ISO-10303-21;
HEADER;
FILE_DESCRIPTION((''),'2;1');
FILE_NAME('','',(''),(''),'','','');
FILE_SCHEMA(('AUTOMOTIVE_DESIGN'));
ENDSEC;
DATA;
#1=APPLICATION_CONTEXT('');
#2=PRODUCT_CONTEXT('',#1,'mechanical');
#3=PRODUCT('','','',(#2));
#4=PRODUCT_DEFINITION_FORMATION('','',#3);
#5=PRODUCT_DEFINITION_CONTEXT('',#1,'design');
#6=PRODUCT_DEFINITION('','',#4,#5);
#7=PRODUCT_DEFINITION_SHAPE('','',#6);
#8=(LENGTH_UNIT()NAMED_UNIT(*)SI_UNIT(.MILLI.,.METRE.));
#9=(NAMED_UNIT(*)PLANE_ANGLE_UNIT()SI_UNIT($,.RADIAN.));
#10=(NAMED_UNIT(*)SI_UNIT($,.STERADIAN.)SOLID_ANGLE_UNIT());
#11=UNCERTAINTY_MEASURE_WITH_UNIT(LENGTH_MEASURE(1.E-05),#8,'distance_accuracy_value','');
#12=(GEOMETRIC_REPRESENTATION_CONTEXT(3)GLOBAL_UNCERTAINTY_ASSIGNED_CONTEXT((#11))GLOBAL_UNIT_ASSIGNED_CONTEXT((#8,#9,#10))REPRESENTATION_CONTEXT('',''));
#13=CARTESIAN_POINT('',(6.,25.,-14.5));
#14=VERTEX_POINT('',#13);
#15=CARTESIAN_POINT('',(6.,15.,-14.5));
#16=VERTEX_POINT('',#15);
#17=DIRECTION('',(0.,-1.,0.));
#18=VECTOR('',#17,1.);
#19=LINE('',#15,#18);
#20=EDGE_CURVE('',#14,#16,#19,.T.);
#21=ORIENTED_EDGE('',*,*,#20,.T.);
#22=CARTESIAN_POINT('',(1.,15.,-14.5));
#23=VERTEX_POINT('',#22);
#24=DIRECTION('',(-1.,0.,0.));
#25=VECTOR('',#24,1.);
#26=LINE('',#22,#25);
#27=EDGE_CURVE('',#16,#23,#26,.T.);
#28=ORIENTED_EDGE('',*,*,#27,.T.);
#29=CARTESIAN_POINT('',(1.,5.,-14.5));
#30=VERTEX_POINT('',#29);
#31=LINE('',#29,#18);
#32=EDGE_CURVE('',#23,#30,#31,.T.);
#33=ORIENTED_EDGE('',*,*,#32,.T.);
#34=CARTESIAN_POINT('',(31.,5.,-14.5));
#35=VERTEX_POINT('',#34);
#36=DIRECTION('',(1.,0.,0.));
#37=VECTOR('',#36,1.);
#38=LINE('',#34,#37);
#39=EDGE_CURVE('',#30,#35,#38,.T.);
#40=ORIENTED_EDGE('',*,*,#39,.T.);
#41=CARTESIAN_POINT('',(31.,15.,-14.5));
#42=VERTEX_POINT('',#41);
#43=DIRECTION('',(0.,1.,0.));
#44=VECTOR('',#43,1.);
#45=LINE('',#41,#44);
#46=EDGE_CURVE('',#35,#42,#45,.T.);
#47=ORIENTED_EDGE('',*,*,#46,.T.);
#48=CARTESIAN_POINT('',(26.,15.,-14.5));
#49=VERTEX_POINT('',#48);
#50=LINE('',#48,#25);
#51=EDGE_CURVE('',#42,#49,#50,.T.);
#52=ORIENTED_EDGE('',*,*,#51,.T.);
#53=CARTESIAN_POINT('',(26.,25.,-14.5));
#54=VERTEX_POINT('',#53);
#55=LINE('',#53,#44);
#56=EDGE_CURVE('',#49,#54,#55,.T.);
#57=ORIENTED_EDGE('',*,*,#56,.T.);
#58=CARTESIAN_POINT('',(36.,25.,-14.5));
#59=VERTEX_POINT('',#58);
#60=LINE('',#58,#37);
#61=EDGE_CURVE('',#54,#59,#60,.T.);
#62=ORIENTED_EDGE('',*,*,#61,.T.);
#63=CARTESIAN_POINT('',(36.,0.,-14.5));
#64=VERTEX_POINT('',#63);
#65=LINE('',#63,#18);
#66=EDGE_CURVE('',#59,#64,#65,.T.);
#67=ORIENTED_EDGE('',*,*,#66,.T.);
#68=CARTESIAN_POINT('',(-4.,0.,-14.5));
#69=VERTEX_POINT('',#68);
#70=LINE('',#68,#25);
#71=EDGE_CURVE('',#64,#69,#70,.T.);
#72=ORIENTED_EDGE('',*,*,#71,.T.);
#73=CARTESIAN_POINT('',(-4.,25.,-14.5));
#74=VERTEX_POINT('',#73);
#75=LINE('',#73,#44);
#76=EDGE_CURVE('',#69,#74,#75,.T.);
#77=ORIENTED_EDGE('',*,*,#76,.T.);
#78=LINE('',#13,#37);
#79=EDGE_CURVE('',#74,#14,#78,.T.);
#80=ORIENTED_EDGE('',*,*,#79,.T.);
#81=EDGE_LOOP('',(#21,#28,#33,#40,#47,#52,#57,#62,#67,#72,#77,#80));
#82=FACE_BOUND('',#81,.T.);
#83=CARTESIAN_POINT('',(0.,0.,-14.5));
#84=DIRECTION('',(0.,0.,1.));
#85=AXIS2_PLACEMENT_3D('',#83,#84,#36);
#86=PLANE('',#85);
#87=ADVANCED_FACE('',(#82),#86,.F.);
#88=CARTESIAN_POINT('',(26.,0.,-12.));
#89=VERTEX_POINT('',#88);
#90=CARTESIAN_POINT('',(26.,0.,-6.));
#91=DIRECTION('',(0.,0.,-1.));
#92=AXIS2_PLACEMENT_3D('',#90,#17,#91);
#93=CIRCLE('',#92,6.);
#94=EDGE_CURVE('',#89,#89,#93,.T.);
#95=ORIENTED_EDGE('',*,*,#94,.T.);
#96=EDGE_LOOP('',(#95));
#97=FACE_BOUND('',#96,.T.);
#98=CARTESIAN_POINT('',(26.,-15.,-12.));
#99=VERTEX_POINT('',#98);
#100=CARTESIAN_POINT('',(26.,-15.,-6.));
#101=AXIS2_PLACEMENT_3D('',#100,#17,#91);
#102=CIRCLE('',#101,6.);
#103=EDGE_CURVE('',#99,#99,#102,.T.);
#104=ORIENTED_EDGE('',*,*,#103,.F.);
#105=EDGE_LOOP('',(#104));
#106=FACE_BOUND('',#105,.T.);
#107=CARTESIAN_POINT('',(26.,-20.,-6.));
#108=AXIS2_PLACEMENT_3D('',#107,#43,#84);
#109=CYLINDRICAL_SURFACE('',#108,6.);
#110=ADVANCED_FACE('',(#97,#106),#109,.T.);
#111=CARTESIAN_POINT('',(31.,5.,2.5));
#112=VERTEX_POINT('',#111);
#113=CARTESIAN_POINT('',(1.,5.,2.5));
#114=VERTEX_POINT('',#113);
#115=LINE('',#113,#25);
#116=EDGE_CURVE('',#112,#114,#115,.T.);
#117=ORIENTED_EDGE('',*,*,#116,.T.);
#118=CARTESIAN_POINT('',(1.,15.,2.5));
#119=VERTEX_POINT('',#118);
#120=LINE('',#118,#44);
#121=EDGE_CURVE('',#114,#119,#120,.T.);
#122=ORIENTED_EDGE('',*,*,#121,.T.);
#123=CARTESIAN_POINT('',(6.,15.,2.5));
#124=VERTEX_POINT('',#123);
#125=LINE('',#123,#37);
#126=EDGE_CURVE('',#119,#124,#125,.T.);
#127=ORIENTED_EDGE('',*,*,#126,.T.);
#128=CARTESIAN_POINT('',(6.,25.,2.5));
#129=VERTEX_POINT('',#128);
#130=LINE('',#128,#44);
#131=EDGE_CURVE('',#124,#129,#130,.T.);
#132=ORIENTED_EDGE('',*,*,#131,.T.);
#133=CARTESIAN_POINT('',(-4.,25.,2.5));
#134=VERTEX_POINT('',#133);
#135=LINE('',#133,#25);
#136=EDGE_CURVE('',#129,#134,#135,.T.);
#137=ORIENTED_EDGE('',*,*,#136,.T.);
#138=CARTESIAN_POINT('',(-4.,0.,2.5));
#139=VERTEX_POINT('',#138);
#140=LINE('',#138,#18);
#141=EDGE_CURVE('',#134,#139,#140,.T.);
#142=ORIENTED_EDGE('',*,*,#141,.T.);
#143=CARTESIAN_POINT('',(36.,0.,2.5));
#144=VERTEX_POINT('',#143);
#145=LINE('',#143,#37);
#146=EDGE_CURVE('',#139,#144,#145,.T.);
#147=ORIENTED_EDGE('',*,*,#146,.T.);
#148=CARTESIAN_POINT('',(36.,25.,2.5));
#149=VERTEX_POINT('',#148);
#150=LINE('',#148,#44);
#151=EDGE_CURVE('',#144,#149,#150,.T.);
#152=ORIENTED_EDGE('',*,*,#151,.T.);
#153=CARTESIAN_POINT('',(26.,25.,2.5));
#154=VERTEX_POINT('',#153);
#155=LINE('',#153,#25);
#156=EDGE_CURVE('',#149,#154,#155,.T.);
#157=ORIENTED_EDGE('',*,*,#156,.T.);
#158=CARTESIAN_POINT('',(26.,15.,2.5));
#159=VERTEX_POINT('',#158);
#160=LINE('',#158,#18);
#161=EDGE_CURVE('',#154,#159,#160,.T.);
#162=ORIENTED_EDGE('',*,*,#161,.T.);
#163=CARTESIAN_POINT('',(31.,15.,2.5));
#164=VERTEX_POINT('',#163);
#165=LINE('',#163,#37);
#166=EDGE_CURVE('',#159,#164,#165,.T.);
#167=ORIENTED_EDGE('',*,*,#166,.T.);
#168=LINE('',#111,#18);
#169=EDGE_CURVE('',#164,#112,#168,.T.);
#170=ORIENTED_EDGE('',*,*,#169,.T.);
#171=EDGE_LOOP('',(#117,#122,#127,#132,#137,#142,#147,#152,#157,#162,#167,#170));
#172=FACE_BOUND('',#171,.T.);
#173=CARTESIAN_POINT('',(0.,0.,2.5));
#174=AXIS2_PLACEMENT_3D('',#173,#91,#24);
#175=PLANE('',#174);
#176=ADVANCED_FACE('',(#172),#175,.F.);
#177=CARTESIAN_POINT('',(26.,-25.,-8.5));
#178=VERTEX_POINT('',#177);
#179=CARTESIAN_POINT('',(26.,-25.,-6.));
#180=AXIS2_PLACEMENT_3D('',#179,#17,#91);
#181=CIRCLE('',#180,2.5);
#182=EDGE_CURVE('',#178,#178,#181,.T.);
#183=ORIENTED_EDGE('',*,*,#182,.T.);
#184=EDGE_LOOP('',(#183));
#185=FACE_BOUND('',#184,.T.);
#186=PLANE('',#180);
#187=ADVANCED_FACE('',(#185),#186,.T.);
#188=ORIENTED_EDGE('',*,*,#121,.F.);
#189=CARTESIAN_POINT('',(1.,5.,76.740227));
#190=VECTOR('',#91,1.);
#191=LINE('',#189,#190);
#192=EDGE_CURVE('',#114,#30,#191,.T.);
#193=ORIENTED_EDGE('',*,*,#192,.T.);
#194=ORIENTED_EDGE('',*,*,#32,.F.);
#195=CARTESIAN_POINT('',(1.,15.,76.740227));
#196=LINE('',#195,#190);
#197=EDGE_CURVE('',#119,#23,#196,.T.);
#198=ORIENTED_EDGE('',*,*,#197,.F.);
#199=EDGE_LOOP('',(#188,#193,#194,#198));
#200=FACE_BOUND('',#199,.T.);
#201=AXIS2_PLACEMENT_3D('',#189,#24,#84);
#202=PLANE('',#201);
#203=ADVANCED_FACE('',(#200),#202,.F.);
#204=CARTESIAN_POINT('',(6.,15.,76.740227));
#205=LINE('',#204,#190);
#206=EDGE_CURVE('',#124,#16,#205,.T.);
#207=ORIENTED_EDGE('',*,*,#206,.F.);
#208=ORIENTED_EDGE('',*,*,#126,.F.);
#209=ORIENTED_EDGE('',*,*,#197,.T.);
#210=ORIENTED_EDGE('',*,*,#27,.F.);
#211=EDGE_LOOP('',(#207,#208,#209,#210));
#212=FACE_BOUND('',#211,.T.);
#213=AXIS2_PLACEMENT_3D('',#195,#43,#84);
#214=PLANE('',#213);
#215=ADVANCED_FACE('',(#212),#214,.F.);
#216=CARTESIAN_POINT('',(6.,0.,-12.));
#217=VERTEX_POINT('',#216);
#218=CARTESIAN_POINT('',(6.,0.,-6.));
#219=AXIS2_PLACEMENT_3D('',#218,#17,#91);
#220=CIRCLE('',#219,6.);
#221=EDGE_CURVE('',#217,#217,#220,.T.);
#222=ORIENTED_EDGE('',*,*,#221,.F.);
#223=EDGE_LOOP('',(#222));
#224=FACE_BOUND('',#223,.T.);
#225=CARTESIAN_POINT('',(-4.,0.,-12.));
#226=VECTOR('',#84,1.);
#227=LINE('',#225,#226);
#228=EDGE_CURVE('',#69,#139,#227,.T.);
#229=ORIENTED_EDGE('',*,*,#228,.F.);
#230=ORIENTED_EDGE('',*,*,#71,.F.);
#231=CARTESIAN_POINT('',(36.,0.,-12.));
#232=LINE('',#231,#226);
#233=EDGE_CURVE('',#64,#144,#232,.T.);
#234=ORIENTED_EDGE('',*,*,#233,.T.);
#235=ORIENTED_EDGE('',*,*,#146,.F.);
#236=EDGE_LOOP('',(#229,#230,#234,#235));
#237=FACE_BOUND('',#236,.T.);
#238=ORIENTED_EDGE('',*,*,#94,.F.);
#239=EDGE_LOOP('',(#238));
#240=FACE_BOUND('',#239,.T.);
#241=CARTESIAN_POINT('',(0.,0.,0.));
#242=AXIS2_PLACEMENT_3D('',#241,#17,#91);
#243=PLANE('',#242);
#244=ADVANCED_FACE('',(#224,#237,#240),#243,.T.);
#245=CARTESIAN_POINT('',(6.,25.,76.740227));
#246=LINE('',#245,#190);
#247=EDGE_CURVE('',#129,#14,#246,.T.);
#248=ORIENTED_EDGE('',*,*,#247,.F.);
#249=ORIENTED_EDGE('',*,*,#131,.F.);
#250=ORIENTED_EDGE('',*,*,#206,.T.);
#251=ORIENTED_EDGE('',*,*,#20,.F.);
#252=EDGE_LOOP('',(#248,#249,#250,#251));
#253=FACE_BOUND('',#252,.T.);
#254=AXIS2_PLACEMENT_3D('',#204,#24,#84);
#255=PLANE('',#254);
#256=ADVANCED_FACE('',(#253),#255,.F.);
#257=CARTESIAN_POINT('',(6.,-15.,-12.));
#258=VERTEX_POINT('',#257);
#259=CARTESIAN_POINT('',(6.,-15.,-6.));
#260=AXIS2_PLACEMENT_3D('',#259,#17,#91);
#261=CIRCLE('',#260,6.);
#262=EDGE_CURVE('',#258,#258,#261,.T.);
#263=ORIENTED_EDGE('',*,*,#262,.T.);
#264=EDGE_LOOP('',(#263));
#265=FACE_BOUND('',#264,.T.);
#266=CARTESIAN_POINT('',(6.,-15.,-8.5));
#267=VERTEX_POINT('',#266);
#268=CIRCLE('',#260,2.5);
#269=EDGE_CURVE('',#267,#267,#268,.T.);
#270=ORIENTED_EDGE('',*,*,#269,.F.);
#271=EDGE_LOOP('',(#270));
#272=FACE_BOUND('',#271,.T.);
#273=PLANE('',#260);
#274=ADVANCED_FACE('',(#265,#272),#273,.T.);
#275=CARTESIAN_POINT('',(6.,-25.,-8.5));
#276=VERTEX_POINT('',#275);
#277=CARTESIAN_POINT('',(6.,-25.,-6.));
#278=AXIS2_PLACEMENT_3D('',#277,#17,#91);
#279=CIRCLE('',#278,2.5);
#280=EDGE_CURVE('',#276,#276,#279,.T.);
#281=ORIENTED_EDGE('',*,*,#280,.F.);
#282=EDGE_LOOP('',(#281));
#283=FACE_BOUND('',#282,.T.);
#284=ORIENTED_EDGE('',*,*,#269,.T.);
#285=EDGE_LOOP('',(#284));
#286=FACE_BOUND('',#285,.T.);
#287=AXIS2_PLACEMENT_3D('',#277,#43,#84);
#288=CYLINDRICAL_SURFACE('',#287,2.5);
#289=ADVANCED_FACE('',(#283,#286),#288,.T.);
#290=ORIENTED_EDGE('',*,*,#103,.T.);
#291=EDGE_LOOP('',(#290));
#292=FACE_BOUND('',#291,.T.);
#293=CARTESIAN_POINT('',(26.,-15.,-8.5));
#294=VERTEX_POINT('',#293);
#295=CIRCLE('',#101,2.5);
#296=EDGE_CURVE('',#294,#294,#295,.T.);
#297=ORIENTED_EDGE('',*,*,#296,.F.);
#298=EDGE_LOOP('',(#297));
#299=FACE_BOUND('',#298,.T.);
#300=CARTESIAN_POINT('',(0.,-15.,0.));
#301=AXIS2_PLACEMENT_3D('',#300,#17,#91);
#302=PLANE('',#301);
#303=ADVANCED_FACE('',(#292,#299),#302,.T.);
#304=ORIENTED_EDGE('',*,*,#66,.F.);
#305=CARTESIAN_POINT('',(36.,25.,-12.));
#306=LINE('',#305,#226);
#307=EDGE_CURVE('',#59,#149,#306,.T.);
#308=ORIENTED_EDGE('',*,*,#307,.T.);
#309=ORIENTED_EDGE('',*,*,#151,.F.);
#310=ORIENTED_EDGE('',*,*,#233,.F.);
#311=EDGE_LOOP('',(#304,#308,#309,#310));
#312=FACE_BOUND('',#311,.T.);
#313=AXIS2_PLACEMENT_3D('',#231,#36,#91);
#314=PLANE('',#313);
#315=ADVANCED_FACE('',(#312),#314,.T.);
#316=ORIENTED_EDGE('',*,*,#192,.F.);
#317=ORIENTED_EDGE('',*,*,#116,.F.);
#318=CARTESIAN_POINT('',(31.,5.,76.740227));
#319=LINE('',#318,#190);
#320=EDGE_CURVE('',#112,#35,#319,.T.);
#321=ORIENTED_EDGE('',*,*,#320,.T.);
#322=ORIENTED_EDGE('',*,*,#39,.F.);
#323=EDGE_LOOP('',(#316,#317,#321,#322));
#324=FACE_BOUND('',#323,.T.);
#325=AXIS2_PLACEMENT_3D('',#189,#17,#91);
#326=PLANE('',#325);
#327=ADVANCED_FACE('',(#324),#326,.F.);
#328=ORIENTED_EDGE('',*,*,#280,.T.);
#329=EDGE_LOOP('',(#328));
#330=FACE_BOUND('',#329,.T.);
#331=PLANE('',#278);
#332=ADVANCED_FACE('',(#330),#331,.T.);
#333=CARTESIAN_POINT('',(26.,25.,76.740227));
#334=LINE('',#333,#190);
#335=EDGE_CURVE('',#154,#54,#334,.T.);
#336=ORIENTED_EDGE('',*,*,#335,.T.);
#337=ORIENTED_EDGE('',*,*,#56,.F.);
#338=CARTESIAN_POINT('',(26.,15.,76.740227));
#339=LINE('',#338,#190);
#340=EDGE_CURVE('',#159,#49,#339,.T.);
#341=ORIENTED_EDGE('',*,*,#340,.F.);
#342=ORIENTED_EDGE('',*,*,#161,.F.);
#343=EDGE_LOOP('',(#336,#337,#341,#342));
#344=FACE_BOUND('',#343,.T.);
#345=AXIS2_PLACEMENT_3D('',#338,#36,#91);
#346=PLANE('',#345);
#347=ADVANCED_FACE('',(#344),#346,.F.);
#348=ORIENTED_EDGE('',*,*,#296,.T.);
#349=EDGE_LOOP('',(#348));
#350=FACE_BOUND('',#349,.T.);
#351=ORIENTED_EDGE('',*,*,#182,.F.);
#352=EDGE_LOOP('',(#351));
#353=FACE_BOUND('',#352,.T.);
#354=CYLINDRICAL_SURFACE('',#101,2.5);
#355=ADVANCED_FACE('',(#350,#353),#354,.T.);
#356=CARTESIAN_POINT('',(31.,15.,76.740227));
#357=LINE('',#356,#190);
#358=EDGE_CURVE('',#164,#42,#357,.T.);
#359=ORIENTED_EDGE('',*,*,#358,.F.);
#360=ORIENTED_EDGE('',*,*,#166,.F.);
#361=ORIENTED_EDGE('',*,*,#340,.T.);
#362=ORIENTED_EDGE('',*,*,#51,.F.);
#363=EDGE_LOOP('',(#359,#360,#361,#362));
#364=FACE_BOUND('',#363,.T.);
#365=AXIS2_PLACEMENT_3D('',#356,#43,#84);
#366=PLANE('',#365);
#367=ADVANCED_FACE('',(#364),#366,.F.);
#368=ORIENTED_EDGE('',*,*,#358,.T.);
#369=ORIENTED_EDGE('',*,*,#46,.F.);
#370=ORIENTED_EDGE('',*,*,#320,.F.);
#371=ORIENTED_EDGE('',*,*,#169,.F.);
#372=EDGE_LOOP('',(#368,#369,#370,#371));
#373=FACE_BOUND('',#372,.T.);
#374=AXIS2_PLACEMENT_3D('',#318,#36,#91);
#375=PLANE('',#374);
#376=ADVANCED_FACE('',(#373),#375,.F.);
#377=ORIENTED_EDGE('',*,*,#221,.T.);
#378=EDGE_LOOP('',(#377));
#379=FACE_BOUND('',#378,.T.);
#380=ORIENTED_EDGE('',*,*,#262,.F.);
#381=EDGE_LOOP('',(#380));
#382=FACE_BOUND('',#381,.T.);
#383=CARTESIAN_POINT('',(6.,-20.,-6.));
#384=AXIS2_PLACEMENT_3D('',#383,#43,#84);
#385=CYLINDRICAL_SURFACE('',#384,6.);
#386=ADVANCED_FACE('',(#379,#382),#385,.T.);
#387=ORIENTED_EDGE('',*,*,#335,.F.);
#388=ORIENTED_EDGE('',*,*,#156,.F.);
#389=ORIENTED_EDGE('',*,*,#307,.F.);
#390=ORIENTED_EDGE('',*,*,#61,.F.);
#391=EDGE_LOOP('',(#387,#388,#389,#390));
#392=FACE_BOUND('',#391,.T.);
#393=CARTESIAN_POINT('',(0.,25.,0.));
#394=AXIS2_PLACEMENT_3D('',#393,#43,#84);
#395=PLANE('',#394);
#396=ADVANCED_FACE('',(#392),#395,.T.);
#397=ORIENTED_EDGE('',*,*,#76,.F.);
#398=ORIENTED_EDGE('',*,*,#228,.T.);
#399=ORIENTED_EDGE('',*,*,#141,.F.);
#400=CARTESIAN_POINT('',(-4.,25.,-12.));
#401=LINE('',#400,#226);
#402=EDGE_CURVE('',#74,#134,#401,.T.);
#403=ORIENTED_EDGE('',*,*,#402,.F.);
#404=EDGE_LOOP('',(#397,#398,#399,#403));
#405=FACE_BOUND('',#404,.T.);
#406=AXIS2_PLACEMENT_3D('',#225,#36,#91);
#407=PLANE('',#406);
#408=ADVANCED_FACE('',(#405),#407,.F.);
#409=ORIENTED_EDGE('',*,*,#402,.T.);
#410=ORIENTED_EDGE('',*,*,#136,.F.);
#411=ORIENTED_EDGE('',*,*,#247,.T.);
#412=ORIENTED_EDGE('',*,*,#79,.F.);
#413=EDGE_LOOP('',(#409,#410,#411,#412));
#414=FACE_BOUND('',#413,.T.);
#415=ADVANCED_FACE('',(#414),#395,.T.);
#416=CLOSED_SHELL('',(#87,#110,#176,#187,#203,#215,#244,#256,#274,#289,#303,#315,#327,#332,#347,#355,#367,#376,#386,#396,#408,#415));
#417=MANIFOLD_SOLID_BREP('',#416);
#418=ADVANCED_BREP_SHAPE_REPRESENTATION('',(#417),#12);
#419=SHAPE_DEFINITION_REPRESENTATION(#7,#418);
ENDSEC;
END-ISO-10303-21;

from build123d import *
from build123d.topology import SkipClean

# Parameters (mm, degrees)
SKETCH_3_W          = 32
SKETCH_3_H          = 12
EXTRUDE_3_DEPTH     = 5
SKETCH_4_R          = 5
EXTRUDE_4_DEPTH     = 10
SKETCH_8_R          = 5
EXTRUDE_6_DEPTH     = 5
SKETCH_9_R          = 4.8
CUT_EXTRUDE_2_DEPTH = 0.5
EXTRUDE_START       = 5
SKETCH_36_R         = 5
SKETCH_36_R_2       = 4.98
EXTRUDE_11_DEPTH    = 5
SKETCH_46_W         = 32
SKETCH_46_H         = 12
EXTRUDE_12_DEPTH    = 20
SKETCH_47_W         = 4
SKETCH_47_H         = 25
EXTRUDE_13_DEPTH    = 12
SKETCH_48_W         = 4
SKETCH_48_H         = 25
EXTRUDE_14_DEPTH    = 12
CUT_EXTRUDE_START   = -12
CUT_EXTRUDE_5_DEPTH = 12
SKETCH_50_R         = 6
EXTRUDE_15_DEPTH    = 20
SKETCH_51_R         = 6
EXTRUDE_16_DEPTH    = 20
SKETCH_54_R         = 6
EXTRUDE_17_DEPTH    = 25
SKETCH_55_R         = 6
EXTRUDE_18_DEPTH    = 25
SKETCH_56_R         = 6
CUT_EXTRUDE_6_DEPTH = 10
SKETCH_57_R         = 2.5
EXTRUDE_19_DEPTH    = 10
SKETCH_58_R         = 6
SKETCH_58_R_2       = 2.5
CUT_EXTRUDE_8_DEPTH = 10
EXTRUDE_20_DEPTH    = 2.5
EXTRUDE_21_DEPTH    = 2.5


# Read off the part's stored shape, not the designer's step: the extrude step
with BuildPart() as part:
    # Sketch 3 → Extrude 3 (new body)
    with BuildSketch(Plane(origin=(0, 0, 0), x_dir=(1, 0, 0), z_dir=(0, 1, 0))):
        with Locations((16, 6)):
            Rectangle(SKETCH_3_W, SKETCH_3_H)
    extrude(amount=EXTRUDE_3_DEPTH)

    # Sketch 4 → Extrude 4 (add)
    with BuildSketch(Plane.XZ):
        with Locations(Location((6, -6, 0), (0, 0, 270))):
            Circle(SKETCH_4_R)
        with Locations(Location((26, -6, 0), (0, 0, 270))):
            Circle(SKETCH_4_R)
    extrude(amount=EXTRUDE_4_DEPTH)

    # Sketch 8 → Extrude 6 (add)
    with BuildSketch(Plane.XZ.offset(10)):
        with Locations(Location((6, -6, 0), (0, 0, 270))):
            Circle(SKETCH_8_R)
    extrude(amount=EXTRUDE_6_DEPTH)

    # Sketch 9 → Cut-Extrude 2 (cut)
    with BuildSketch(Plane.XZ.offset(15)):
        with Locations(Location((6, -6, 0), (0, 0, 270))):
            Circle(SKETCH_9_R)
    extrude(amount=-CUT_EXTRUDE_2_DEPTH, mode=Mode.SUBTRACT)



with BuildPart() as body_2:
    # Sketch 14 → Revolve 2 (revolve)
    with BuildSketch(Plane.XY.offset(-6), mode=Mode.PRIVATE) as revolve_2_sk:
        Polygon((1.021282046, -15), (1.021282046, -20), (1.221282046, -15), align=None)
    revolve(revolve_2_sk.sketch.rotate(Axis((6, -15, -6), (0, 1, 0)), 270), axis=Axis((6, -15, -6), (0, 1, 0)))


with BuildPart() as part_1:
    with SkipClean():  # the faces are left unmerged after this step: merging them gives an invalid solid
        add(part.part)

        add(body_2.part)  # Extrude 11 merges body 2
        # Sketch 36 → Extrude 11 (add)
        with BuildSketch(Plane(origin=(0, -20, 0), x_dir=(1, 0, 0), z_dir=(0, 1, 0)).offset(EXTRUDE_START)):
            with Locations(Location((6, 6, 0), (0, 0, 270))):
                Circle(SKETCH_36_R)
            with Locations(Location((6, 6, 0), (0, 0, 90))):
                Circle(SKETCH_36_R_2, mode=Mode.SUBTRACT)
        extrude(amount=-EXTRUDE_11_DEPTH)

    # Sketch 46 → Extrude 12 (add)
    with SkipClean():  # the faces are left unmerged after this step: merging them gives an invalid solid
        with BuildSketch(Plane(origin=(0, 5, 0), x_dir=(1, 0, 0), z_dir=(0, 1, 0))):
            with Locations((16, 6)):
                Rectangle(SKETCH_46_W, SKETCH_46_H)
        extrude(amount=EXTRUDE_12_DEPTH)

    # Sketch 47 → Extrude 13 (add)
    with SkipClean():  # the faces are left unmerged after this step: merging them gives an invalid solid
        with BuildSketch(Plane.XY):
            with Locations((-2, 12.5)):
                Rectangle(SKETCH_47_W, SKETCH_47_H)
        extrude(amount=-EXTRUDE_13_DEPTH)

    # Sketch 48 → Extrude 14 (add)
    with SkipClean():  # the faces are left unmerged after this step: merging them gives an invalid solid
        with BuildSketch(Plane.XY):
            with Locations((34, 12.5)):
                Rectangle(SKETCH_48_W, SKETCH_48_H)
        extrude(amount=-EXTRUDE_14_DEPTH)

    # Cut-Extrude 5 outline → Cut-Extrude 5 (cut)
    with SkipClean():  # the faces are left unmerged after this step: merging them gives an invalid solid
        with BuildSketch(Plane.XY.offset(CUT_EXTRUDE_START)):
            Polygon((26, 25), (6, 25), (6, 15), (1, 15), (1, 5), (31, 5), (31, 15), (26, 15), align=None)
        extrude(amount=CUT_EXTRUDE_5_DEPTH, mode=Mode.SUBTRACT)

    # Sketch 50 → Extrude 15 (add)
    with BuildSketch(Plane.XZ):
        with Locations(Location((6, -6, 0), (0, 0, 270))):
            Circle(SKETCH_50_R)
    extrude(amount=EXTRUDE_15_DEPTH)

    # Sketch 51 → Extrude 16 (add)
    with BuildSketch(Plane.XZ):
        with Locations(Location((26, -6, 0), (0, 0, 270))):
            Circle(SKETCH_51_R)
    extrude(amount=EXTRUDE_16_DEPTH)

    # Sketch 52 → Revolve 3 (revolve)
    with BuildSketch(Plane.XY.offset(-6), mode=Mode.PRIVATE) as revolve_3_sk:
        Polygon((0, -20), (0, -25), (0.2, -20), align=None)
    revolve(revolve_3_sk.sketch.rotate(Axis((6, -20, -6), (0, -1, 0)), 270), axis=Axis((6, -20, -6), (0, -1, 0)))

    # Sketch 53 → Revolve 4 (revolve)
    with BuildSketch(Plane.XY.offset(-6), mode=Mode.PRIVATE) as revolve_4_sk:
        Polygon((20, -20), (20, -25), (20.2, -20), align=None)
    revolve(revolve_4_sk.sketch.rotate(Axis((26, -20, -6), (0, -1, 0)), 270), axis=Axis((26, -20, -6), (0, -1, 0)))

    # Sketch 54 → Extrude 17 (add)
    with BuildSketch(Plane.XZ):
        with Locations(Location((6, -6, 0), (0, 0, 270))):
            Circle(SKETCH_54_R)
    extrude(amount=EXTRUDE_17_DEPTH)

    # Sketch 55 → Extrude 18 (add)
    with BuildSketch(Plane.XZ):
        with Locations(Location((26, -6, 0), (0, 0, 270))):
            Circle(SKETCH_55_R)
    extrude(amount=EXTRUDE_18_DEPTH)

    # Sketch 56 → Cut-Extrude 6 (cut)
    with BuildSketch(Plane.XZ.offset(25)):
        with Locations(Location((6, -6, 0), (0, 0, 270))):
            Circle(SKETCH_56_R)
    extrude(amount=-CUT_EXTRUDE_6_DEPTH, mode=Mode.SUBTRACT)

    # Sketch 57 → Extrude 19 (add)
    with BuildSketch(Plane.XZ.offset(15)):
        with Locations(Location((6, -6, 0), (0, 0, 270))):
            Circle(SKETCH_57_R)
    extrude(amount=EXTRUDE_19_DEPTH)

    # Sketch 58 → Cut-Extrude 8 (cut)
    with BuildSketch(Plane.XZ.offset(25)):
        with Locations(Location((26, -6, 0), (0, 0, 270))):
            Circle(SKETCH_58_R)
        with Locations(Location((26, -6, 0), (0, 0, 270))):
            Circle(SKETCH_58_R_2, mode=Mode.SUBTRACT)
    extrude(amount=-CUT_EXTRUDE_8_DEPTH, mode=Mode.SUBTRACT)

    # Sketch 60 → Extrude 20 (add)
    with BuildSketch(Plane.XY):
        Polygon((-4, 25), (6, 25), (6, 15), (1, 15), (1, 5), (31, 5), (31, 15), (26, 15), (26, 25), (36, 25), (36, 0), (-4, 0), align=None)
    extrude(amount=EXTRUDE_20_DEPTH)

    # Sketch 61 → Extrude 21 (add)
    with BuildSketch(Plane(origin=(0, 0, -12), x_dir=(-1, 0, 0), z_dir=(0, 0, -1))):
        Polygon((-36, 25), (-26, 25), (-26, 15), (-31, 15), (-31, 5), (-1, 5), (-1, 15), (-6, 15), (-6, 25), (4, 25), (4, 0), (-36, 0), align=None)
    extrude(amount=EXTRUDE_21_DEPTH)


solid = part_1.part
